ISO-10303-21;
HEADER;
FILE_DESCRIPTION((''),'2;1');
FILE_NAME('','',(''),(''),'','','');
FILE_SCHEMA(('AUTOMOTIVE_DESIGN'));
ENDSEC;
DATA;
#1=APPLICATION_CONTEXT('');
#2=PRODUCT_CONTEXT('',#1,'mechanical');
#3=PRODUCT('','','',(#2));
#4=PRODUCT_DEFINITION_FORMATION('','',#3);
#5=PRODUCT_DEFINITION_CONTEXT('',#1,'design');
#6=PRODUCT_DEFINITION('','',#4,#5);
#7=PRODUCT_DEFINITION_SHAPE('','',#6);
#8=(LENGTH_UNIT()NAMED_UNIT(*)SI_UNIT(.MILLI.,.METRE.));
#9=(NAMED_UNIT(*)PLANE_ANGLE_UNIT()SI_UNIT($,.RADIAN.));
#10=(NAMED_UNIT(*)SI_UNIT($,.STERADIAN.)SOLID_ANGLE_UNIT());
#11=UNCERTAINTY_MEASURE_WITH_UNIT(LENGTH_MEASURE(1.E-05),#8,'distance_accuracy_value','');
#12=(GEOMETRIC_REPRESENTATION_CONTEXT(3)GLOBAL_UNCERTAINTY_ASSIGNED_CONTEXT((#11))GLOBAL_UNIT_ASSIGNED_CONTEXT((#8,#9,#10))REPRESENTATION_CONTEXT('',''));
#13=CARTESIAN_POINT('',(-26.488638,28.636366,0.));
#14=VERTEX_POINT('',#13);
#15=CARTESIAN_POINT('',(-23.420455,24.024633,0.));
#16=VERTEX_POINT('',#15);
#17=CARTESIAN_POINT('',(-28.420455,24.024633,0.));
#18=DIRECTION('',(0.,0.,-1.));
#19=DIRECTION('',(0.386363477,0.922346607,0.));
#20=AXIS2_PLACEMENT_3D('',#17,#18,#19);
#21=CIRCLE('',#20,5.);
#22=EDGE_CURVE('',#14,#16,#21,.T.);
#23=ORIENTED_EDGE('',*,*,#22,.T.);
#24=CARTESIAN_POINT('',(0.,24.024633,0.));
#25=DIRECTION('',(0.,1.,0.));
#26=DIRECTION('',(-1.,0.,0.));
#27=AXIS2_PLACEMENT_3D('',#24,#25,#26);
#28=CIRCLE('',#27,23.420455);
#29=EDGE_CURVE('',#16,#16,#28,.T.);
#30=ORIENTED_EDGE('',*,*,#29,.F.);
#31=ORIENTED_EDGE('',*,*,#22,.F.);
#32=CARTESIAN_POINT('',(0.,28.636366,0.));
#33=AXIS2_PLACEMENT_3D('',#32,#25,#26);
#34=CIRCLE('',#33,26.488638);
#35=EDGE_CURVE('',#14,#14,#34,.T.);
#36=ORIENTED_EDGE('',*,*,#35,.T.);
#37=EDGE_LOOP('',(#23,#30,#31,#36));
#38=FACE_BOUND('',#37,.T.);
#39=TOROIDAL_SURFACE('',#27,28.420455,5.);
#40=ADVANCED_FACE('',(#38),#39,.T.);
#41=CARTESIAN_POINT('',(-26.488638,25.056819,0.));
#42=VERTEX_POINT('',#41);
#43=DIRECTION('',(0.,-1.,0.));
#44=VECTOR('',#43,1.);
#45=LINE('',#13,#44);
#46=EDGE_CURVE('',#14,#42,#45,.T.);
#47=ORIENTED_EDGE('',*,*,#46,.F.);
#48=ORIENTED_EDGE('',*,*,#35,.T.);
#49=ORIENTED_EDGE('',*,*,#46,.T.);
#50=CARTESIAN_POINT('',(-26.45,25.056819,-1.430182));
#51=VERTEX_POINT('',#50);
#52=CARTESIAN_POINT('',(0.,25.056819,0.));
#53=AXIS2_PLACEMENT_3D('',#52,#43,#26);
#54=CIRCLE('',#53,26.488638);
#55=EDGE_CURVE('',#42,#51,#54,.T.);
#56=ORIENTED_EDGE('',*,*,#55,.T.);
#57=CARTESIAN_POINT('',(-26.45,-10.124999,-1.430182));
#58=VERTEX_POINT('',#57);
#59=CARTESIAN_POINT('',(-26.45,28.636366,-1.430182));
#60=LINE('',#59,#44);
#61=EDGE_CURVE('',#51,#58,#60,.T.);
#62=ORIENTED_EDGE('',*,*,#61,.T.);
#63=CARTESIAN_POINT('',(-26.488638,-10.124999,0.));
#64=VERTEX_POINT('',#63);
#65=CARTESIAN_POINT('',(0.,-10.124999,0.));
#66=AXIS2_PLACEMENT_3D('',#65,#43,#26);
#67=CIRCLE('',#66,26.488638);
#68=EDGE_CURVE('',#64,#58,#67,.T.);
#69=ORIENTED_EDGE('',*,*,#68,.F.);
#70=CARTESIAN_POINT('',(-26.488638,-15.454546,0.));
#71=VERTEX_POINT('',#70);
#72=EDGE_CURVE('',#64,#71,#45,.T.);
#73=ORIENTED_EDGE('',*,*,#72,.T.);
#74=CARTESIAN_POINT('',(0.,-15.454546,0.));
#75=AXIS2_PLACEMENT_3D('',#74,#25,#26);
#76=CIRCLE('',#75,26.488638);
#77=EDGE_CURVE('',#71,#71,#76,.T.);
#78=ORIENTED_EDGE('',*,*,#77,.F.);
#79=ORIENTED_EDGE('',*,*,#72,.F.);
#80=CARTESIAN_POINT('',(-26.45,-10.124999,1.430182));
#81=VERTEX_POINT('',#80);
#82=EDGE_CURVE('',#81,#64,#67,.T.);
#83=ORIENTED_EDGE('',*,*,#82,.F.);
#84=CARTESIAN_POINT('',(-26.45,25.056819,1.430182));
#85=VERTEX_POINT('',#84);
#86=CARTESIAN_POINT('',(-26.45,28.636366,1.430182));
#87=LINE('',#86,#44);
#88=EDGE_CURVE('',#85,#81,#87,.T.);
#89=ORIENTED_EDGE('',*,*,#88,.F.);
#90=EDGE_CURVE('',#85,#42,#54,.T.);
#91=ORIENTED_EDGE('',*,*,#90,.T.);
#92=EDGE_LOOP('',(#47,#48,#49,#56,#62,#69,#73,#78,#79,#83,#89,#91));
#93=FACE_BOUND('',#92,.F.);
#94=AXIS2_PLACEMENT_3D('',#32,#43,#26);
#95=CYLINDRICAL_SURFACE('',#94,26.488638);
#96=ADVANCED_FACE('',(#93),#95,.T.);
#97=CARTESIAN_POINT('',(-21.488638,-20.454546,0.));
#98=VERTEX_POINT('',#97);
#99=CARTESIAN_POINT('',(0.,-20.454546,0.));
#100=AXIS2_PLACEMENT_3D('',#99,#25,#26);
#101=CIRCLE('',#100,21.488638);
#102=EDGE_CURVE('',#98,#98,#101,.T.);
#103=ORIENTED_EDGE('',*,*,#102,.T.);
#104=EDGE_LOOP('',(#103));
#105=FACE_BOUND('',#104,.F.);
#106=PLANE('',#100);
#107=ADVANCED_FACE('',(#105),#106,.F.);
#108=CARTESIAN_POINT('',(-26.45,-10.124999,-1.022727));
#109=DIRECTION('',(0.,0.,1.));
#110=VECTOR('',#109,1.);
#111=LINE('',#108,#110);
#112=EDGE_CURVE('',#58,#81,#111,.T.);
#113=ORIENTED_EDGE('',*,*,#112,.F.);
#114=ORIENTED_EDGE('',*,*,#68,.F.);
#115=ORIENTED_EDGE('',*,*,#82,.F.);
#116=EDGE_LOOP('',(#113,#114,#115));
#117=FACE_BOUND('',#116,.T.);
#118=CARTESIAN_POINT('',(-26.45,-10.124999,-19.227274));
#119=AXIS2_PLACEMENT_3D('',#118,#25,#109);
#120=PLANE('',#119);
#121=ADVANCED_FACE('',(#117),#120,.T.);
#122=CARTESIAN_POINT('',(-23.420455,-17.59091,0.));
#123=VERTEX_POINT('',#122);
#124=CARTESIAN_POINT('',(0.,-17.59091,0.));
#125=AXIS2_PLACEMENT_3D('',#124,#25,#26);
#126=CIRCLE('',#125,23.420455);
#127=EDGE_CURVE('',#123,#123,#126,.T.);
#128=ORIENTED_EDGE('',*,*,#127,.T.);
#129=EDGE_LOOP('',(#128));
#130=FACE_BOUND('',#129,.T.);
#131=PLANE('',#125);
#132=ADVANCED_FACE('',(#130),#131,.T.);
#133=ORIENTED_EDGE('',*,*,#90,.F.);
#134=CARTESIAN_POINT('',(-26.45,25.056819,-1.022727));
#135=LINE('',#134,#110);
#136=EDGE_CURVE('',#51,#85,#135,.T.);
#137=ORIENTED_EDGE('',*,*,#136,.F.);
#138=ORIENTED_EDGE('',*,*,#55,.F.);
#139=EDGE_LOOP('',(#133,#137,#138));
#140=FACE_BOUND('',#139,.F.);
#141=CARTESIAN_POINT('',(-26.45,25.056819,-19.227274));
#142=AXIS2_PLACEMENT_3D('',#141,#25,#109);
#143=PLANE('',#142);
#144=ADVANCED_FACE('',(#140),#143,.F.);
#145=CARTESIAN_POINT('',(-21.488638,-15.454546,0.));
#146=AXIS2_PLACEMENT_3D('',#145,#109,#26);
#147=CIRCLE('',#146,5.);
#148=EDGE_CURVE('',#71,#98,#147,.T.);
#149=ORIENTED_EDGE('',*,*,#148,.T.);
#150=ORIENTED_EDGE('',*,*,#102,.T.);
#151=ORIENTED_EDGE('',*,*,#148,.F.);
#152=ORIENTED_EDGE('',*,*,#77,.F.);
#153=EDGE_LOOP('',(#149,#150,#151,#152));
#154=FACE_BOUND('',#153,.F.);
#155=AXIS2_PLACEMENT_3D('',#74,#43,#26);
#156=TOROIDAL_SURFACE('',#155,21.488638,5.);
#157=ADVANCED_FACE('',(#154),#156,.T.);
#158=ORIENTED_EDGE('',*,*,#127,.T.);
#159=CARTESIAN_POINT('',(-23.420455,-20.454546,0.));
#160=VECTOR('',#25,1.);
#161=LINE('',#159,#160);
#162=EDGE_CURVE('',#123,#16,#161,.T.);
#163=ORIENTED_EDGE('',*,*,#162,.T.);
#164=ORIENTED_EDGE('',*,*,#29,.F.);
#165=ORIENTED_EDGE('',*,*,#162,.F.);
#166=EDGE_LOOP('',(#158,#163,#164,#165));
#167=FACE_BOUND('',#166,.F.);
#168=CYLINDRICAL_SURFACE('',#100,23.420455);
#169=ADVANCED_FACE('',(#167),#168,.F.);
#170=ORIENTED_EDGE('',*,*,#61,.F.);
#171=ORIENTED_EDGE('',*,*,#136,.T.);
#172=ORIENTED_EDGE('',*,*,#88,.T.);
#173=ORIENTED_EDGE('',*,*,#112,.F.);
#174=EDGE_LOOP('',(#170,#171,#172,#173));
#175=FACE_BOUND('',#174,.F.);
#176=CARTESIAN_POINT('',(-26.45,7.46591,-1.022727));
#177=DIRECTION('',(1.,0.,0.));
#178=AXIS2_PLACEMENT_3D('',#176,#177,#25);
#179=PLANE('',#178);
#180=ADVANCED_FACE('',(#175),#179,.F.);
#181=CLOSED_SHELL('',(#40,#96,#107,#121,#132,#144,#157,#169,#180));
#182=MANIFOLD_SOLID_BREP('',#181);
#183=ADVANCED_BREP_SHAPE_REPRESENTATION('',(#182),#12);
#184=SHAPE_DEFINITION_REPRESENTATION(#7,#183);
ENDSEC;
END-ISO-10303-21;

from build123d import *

# Parameters (mm, degrees)
F0_W     = 23.4204549342
F0_H     = 2.8636362404
F3_R     = 5
F5_W     = 35.1818175986
F5_H     = 36.409093067
F6_DEPTH = 64


# Not quite as in the source:
# - a fillet or chamfer that OpenCascade refuses, or shapes differently, is made with other operations: its cross-section is extruded or revolved along the edge and cut away or added


with BuildPart() as f1:
    # F0 (on Top) → F1 (revolve)
    with BuildSketch(Plane.XY):
        Polygon((-23.4204549342, 28.6363661289), (-26.4886375517, 28.6363661289), (-26.4886375517, -20.4545464367), (-23.4204549342, -20.4545464367), (-23.4204549342, -17.5909101963), align=None)
        with Locations((-11.7102274671, -19.0227283165)):
            Rectangle(F0_W, F0_H)
    revolve(axis=Axis((0, -19.0227283165, 0), (0, 1, 0)))

    # F3
    f3_edges = [f1.edges().sort_by_distance(p)[0] for p in [
        (26.488638, -20.454546, 0),
    ]]
    fillet(f3_edges, radius=F3_R)

    # F4: fillet of radius 5 on 1 edges, made by hand

    # F4_s1 → F4_t2 (revolve, cut)
    with BuildSketch(Plane.XY):
        with BuildLine():
            ThreePointArc((-26.4886375517, 28.6363661289), (-24.2575781097, 26.7941920001), (-23.4204549342, 24.0246330924))
            Line((-23.4204549342, 24.0246330924), (-23.4204549342, 28.6363661289))
            Line((-23.4204549342, 28.6363661289), (-26.4886375517, 28.6363661289))
        make_face()
    revolve(axis=Axis((0, 28.6363661289, 0), (0, 1, 0)), mode=Mode.SUBTRACT)

    # F5 (on offset) → F6 (cut)
    with BuildSketch(Plane.YZ.offset(-26.45)):
        with Locations((7.4659097008, -1.0227272287)):
            Rectangle(F5_W, F5_H)
    extrude(amount=-F6_DEPTH, mode=Mode.SUBTRACT)


solid = f1.part
